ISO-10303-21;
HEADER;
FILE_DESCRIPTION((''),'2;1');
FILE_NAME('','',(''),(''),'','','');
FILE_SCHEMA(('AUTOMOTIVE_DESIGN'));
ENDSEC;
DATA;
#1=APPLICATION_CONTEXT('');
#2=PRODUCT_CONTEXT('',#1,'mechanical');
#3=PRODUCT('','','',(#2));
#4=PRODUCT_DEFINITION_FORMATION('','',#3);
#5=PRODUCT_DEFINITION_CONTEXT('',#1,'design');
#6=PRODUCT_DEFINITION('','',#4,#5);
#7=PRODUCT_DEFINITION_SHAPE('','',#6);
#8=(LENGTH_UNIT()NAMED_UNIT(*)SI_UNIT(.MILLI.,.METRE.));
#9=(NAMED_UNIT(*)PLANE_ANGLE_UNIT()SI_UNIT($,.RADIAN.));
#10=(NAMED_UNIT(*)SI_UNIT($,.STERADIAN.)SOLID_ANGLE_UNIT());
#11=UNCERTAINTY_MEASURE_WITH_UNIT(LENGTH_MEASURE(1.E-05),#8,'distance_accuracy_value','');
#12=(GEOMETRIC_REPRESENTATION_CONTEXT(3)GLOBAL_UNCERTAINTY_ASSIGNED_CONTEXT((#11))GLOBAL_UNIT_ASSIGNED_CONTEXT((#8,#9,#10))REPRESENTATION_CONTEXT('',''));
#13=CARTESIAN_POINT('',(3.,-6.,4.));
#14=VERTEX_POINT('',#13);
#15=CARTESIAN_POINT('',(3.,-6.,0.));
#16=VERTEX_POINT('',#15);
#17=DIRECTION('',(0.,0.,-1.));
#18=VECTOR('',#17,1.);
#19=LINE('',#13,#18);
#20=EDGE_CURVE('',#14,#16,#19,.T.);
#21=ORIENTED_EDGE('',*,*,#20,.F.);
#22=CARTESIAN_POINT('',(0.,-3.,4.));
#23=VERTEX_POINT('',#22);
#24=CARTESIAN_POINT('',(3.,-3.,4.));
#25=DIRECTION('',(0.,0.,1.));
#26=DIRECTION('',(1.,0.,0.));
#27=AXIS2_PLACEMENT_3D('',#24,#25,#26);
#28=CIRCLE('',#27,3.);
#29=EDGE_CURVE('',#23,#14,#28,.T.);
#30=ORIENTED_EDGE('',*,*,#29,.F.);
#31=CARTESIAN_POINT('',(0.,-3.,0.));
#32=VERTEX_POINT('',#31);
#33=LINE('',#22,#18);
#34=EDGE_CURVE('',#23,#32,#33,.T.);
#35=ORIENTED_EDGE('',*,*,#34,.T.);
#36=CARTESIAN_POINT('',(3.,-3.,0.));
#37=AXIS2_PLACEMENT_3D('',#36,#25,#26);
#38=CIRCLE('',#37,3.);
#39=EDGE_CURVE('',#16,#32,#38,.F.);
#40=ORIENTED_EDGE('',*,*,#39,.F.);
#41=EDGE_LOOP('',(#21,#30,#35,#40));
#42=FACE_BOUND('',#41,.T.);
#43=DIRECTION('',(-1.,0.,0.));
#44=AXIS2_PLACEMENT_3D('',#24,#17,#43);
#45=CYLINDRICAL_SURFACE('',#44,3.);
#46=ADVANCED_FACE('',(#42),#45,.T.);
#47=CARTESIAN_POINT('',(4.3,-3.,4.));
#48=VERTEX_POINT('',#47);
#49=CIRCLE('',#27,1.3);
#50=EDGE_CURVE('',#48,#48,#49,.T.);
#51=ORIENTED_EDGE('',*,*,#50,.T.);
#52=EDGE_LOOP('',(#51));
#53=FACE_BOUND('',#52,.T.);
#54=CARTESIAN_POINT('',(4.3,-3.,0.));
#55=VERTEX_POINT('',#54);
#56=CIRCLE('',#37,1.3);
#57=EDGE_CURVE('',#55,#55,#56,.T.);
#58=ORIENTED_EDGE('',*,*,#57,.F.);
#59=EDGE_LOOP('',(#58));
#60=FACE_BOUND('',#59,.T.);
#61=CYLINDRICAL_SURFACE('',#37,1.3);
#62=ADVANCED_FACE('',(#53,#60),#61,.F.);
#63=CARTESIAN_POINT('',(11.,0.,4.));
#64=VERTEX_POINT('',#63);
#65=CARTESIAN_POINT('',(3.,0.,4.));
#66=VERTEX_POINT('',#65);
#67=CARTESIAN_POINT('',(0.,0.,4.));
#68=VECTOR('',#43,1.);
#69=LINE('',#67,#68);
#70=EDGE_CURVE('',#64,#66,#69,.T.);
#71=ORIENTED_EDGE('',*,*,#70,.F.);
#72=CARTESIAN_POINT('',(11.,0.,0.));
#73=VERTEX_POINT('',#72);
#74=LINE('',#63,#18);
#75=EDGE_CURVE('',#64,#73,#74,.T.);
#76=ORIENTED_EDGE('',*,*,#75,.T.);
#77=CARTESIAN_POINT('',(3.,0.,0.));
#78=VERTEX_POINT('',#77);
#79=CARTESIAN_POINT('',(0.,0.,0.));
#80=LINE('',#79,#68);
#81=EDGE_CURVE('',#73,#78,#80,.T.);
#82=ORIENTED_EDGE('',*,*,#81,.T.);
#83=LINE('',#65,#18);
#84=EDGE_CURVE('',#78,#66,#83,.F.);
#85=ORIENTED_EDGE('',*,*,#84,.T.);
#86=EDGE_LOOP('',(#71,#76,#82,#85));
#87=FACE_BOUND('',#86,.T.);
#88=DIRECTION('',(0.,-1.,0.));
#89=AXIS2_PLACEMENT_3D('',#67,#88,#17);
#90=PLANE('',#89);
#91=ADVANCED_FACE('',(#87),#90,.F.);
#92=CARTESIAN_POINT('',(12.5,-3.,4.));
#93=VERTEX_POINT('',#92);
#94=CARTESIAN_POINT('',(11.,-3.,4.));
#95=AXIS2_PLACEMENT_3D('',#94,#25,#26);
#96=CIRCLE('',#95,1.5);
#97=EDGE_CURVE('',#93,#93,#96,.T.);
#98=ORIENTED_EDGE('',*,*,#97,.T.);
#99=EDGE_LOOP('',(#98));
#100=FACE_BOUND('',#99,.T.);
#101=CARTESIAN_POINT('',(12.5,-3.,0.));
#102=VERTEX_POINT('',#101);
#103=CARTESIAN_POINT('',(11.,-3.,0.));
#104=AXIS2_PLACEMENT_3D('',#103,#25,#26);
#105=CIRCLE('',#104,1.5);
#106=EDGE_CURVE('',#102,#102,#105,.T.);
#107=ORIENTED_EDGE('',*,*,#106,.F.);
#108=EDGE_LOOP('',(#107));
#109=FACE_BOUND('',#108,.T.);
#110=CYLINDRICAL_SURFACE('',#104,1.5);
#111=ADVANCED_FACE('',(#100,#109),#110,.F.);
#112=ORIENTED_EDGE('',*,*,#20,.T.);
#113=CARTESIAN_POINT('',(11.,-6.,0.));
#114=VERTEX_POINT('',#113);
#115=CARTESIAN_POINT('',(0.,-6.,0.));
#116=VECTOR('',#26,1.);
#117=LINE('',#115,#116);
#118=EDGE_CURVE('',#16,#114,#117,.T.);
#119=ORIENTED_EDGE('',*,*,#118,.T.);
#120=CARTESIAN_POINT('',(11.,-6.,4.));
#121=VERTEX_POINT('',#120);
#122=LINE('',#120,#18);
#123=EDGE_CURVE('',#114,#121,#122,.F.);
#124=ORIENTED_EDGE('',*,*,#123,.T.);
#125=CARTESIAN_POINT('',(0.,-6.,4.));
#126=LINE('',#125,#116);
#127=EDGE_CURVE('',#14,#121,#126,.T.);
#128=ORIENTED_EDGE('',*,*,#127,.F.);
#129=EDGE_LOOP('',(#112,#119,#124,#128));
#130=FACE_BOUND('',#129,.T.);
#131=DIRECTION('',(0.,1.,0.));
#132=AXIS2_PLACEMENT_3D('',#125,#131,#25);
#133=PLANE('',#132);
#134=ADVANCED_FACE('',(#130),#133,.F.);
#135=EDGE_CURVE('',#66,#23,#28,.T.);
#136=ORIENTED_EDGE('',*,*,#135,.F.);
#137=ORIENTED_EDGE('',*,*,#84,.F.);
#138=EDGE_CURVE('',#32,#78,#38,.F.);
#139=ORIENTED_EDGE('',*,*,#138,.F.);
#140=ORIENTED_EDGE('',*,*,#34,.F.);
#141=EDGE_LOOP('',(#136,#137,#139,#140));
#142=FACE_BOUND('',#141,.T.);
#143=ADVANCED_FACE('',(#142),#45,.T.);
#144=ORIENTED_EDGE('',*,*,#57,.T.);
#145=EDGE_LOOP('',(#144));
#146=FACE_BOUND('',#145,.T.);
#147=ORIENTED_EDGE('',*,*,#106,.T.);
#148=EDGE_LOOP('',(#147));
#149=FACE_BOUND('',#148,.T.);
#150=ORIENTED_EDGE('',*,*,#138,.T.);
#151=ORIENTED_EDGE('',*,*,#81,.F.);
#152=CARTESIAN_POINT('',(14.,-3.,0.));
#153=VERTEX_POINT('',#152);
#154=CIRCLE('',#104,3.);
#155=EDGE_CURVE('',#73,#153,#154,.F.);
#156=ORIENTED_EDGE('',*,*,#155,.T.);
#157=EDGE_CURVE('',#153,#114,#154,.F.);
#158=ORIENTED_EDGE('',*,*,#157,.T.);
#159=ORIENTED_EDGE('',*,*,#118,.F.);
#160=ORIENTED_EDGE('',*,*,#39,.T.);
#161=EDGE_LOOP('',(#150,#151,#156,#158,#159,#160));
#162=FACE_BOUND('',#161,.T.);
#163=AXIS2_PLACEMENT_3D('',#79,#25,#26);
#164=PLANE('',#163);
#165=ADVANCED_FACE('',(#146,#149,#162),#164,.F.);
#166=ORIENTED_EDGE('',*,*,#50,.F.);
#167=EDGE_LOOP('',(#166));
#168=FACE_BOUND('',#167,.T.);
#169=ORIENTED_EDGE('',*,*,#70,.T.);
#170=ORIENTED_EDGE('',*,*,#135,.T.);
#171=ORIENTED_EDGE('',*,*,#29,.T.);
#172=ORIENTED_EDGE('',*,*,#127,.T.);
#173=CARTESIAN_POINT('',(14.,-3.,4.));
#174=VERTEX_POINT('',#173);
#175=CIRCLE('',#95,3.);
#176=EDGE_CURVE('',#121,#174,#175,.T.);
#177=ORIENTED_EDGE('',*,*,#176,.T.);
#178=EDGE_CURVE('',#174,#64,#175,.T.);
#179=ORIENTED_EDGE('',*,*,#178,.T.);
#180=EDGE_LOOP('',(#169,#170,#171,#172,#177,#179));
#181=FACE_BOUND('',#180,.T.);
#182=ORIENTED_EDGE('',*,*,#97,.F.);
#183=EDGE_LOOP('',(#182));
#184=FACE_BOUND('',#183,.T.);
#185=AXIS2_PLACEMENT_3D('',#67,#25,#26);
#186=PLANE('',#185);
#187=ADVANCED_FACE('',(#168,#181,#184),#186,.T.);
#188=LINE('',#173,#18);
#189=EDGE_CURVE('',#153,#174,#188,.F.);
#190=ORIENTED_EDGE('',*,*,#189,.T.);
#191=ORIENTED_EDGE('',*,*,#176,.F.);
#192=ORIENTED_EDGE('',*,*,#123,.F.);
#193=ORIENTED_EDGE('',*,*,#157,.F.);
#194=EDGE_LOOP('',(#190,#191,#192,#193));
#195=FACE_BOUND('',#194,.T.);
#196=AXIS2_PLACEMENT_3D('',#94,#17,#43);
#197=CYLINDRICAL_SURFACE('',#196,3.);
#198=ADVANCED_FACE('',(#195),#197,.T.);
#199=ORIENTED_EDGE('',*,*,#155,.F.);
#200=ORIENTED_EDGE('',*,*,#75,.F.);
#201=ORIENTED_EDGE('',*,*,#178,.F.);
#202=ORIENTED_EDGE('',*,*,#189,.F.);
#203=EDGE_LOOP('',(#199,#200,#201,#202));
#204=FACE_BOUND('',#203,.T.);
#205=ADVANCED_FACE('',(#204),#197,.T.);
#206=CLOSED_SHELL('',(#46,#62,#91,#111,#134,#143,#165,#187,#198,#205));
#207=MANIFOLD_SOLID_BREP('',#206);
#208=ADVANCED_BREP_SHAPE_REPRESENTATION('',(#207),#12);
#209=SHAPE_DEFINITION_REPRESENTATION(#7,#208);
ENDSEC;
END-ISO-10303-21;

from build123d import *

# Parameters (mm, degrees)
SKETCH1_W               = 14
SKETCH1_H               = 6
BOSS_EXTRUDE1_DEPTH     = 4
CUT_EXTRUDE1_DEPTH      = 16.748015748
CUT_EXTRUDE1_DEPTH_BACK = 16.748015748
SKETCH2_R               = 1.3
SKETCH2_R_2             = 1.5
FILLET1_R               = 3


with BuildPart() as part:
    # Sketch1 → Boss-Extrude1 (new body)
    with BuildSketch(Plane.XY):
        with Locations((7, -3)):
            Rectangle(SKETCH1_W, SKETCH1_H)
    extrude(amount=BOSS_EXTRUDE1_DEPTH)

    # Sketch2 → Cut-Extrude1 (cut, two sides: drawn at the far end of the back side and taken through both)
    with BuildSketch(Plane.XY.offset(4).offset(-CUT_EXTRUDE1_DEPTH_BACK)):
        with Locations((3, -3)):
            Circle(SKETCH2_R)
        with Locations((11, -3)):
            Circle(SKETCH2_R_2)
    extrude(amount=CUT_EXTRUDE1_DEPTH + CUT_EXTRUDE1_DEPTH_BACK, mode=Mode.SUBTRACT)

    # Fillet1
    fillet1_edges = [part.edges().sort_by_distance(p)[0] for p in [
        (14, -6, 2),
        (14, 0, 2),
        (0, -6, 2),
        (0, 0, 2),
    ]]
    fillet(fillet1_edges, radius=FILLET1_R - 0.0001)  # a hair under: the kernel refuses the full size


solid = part.part
